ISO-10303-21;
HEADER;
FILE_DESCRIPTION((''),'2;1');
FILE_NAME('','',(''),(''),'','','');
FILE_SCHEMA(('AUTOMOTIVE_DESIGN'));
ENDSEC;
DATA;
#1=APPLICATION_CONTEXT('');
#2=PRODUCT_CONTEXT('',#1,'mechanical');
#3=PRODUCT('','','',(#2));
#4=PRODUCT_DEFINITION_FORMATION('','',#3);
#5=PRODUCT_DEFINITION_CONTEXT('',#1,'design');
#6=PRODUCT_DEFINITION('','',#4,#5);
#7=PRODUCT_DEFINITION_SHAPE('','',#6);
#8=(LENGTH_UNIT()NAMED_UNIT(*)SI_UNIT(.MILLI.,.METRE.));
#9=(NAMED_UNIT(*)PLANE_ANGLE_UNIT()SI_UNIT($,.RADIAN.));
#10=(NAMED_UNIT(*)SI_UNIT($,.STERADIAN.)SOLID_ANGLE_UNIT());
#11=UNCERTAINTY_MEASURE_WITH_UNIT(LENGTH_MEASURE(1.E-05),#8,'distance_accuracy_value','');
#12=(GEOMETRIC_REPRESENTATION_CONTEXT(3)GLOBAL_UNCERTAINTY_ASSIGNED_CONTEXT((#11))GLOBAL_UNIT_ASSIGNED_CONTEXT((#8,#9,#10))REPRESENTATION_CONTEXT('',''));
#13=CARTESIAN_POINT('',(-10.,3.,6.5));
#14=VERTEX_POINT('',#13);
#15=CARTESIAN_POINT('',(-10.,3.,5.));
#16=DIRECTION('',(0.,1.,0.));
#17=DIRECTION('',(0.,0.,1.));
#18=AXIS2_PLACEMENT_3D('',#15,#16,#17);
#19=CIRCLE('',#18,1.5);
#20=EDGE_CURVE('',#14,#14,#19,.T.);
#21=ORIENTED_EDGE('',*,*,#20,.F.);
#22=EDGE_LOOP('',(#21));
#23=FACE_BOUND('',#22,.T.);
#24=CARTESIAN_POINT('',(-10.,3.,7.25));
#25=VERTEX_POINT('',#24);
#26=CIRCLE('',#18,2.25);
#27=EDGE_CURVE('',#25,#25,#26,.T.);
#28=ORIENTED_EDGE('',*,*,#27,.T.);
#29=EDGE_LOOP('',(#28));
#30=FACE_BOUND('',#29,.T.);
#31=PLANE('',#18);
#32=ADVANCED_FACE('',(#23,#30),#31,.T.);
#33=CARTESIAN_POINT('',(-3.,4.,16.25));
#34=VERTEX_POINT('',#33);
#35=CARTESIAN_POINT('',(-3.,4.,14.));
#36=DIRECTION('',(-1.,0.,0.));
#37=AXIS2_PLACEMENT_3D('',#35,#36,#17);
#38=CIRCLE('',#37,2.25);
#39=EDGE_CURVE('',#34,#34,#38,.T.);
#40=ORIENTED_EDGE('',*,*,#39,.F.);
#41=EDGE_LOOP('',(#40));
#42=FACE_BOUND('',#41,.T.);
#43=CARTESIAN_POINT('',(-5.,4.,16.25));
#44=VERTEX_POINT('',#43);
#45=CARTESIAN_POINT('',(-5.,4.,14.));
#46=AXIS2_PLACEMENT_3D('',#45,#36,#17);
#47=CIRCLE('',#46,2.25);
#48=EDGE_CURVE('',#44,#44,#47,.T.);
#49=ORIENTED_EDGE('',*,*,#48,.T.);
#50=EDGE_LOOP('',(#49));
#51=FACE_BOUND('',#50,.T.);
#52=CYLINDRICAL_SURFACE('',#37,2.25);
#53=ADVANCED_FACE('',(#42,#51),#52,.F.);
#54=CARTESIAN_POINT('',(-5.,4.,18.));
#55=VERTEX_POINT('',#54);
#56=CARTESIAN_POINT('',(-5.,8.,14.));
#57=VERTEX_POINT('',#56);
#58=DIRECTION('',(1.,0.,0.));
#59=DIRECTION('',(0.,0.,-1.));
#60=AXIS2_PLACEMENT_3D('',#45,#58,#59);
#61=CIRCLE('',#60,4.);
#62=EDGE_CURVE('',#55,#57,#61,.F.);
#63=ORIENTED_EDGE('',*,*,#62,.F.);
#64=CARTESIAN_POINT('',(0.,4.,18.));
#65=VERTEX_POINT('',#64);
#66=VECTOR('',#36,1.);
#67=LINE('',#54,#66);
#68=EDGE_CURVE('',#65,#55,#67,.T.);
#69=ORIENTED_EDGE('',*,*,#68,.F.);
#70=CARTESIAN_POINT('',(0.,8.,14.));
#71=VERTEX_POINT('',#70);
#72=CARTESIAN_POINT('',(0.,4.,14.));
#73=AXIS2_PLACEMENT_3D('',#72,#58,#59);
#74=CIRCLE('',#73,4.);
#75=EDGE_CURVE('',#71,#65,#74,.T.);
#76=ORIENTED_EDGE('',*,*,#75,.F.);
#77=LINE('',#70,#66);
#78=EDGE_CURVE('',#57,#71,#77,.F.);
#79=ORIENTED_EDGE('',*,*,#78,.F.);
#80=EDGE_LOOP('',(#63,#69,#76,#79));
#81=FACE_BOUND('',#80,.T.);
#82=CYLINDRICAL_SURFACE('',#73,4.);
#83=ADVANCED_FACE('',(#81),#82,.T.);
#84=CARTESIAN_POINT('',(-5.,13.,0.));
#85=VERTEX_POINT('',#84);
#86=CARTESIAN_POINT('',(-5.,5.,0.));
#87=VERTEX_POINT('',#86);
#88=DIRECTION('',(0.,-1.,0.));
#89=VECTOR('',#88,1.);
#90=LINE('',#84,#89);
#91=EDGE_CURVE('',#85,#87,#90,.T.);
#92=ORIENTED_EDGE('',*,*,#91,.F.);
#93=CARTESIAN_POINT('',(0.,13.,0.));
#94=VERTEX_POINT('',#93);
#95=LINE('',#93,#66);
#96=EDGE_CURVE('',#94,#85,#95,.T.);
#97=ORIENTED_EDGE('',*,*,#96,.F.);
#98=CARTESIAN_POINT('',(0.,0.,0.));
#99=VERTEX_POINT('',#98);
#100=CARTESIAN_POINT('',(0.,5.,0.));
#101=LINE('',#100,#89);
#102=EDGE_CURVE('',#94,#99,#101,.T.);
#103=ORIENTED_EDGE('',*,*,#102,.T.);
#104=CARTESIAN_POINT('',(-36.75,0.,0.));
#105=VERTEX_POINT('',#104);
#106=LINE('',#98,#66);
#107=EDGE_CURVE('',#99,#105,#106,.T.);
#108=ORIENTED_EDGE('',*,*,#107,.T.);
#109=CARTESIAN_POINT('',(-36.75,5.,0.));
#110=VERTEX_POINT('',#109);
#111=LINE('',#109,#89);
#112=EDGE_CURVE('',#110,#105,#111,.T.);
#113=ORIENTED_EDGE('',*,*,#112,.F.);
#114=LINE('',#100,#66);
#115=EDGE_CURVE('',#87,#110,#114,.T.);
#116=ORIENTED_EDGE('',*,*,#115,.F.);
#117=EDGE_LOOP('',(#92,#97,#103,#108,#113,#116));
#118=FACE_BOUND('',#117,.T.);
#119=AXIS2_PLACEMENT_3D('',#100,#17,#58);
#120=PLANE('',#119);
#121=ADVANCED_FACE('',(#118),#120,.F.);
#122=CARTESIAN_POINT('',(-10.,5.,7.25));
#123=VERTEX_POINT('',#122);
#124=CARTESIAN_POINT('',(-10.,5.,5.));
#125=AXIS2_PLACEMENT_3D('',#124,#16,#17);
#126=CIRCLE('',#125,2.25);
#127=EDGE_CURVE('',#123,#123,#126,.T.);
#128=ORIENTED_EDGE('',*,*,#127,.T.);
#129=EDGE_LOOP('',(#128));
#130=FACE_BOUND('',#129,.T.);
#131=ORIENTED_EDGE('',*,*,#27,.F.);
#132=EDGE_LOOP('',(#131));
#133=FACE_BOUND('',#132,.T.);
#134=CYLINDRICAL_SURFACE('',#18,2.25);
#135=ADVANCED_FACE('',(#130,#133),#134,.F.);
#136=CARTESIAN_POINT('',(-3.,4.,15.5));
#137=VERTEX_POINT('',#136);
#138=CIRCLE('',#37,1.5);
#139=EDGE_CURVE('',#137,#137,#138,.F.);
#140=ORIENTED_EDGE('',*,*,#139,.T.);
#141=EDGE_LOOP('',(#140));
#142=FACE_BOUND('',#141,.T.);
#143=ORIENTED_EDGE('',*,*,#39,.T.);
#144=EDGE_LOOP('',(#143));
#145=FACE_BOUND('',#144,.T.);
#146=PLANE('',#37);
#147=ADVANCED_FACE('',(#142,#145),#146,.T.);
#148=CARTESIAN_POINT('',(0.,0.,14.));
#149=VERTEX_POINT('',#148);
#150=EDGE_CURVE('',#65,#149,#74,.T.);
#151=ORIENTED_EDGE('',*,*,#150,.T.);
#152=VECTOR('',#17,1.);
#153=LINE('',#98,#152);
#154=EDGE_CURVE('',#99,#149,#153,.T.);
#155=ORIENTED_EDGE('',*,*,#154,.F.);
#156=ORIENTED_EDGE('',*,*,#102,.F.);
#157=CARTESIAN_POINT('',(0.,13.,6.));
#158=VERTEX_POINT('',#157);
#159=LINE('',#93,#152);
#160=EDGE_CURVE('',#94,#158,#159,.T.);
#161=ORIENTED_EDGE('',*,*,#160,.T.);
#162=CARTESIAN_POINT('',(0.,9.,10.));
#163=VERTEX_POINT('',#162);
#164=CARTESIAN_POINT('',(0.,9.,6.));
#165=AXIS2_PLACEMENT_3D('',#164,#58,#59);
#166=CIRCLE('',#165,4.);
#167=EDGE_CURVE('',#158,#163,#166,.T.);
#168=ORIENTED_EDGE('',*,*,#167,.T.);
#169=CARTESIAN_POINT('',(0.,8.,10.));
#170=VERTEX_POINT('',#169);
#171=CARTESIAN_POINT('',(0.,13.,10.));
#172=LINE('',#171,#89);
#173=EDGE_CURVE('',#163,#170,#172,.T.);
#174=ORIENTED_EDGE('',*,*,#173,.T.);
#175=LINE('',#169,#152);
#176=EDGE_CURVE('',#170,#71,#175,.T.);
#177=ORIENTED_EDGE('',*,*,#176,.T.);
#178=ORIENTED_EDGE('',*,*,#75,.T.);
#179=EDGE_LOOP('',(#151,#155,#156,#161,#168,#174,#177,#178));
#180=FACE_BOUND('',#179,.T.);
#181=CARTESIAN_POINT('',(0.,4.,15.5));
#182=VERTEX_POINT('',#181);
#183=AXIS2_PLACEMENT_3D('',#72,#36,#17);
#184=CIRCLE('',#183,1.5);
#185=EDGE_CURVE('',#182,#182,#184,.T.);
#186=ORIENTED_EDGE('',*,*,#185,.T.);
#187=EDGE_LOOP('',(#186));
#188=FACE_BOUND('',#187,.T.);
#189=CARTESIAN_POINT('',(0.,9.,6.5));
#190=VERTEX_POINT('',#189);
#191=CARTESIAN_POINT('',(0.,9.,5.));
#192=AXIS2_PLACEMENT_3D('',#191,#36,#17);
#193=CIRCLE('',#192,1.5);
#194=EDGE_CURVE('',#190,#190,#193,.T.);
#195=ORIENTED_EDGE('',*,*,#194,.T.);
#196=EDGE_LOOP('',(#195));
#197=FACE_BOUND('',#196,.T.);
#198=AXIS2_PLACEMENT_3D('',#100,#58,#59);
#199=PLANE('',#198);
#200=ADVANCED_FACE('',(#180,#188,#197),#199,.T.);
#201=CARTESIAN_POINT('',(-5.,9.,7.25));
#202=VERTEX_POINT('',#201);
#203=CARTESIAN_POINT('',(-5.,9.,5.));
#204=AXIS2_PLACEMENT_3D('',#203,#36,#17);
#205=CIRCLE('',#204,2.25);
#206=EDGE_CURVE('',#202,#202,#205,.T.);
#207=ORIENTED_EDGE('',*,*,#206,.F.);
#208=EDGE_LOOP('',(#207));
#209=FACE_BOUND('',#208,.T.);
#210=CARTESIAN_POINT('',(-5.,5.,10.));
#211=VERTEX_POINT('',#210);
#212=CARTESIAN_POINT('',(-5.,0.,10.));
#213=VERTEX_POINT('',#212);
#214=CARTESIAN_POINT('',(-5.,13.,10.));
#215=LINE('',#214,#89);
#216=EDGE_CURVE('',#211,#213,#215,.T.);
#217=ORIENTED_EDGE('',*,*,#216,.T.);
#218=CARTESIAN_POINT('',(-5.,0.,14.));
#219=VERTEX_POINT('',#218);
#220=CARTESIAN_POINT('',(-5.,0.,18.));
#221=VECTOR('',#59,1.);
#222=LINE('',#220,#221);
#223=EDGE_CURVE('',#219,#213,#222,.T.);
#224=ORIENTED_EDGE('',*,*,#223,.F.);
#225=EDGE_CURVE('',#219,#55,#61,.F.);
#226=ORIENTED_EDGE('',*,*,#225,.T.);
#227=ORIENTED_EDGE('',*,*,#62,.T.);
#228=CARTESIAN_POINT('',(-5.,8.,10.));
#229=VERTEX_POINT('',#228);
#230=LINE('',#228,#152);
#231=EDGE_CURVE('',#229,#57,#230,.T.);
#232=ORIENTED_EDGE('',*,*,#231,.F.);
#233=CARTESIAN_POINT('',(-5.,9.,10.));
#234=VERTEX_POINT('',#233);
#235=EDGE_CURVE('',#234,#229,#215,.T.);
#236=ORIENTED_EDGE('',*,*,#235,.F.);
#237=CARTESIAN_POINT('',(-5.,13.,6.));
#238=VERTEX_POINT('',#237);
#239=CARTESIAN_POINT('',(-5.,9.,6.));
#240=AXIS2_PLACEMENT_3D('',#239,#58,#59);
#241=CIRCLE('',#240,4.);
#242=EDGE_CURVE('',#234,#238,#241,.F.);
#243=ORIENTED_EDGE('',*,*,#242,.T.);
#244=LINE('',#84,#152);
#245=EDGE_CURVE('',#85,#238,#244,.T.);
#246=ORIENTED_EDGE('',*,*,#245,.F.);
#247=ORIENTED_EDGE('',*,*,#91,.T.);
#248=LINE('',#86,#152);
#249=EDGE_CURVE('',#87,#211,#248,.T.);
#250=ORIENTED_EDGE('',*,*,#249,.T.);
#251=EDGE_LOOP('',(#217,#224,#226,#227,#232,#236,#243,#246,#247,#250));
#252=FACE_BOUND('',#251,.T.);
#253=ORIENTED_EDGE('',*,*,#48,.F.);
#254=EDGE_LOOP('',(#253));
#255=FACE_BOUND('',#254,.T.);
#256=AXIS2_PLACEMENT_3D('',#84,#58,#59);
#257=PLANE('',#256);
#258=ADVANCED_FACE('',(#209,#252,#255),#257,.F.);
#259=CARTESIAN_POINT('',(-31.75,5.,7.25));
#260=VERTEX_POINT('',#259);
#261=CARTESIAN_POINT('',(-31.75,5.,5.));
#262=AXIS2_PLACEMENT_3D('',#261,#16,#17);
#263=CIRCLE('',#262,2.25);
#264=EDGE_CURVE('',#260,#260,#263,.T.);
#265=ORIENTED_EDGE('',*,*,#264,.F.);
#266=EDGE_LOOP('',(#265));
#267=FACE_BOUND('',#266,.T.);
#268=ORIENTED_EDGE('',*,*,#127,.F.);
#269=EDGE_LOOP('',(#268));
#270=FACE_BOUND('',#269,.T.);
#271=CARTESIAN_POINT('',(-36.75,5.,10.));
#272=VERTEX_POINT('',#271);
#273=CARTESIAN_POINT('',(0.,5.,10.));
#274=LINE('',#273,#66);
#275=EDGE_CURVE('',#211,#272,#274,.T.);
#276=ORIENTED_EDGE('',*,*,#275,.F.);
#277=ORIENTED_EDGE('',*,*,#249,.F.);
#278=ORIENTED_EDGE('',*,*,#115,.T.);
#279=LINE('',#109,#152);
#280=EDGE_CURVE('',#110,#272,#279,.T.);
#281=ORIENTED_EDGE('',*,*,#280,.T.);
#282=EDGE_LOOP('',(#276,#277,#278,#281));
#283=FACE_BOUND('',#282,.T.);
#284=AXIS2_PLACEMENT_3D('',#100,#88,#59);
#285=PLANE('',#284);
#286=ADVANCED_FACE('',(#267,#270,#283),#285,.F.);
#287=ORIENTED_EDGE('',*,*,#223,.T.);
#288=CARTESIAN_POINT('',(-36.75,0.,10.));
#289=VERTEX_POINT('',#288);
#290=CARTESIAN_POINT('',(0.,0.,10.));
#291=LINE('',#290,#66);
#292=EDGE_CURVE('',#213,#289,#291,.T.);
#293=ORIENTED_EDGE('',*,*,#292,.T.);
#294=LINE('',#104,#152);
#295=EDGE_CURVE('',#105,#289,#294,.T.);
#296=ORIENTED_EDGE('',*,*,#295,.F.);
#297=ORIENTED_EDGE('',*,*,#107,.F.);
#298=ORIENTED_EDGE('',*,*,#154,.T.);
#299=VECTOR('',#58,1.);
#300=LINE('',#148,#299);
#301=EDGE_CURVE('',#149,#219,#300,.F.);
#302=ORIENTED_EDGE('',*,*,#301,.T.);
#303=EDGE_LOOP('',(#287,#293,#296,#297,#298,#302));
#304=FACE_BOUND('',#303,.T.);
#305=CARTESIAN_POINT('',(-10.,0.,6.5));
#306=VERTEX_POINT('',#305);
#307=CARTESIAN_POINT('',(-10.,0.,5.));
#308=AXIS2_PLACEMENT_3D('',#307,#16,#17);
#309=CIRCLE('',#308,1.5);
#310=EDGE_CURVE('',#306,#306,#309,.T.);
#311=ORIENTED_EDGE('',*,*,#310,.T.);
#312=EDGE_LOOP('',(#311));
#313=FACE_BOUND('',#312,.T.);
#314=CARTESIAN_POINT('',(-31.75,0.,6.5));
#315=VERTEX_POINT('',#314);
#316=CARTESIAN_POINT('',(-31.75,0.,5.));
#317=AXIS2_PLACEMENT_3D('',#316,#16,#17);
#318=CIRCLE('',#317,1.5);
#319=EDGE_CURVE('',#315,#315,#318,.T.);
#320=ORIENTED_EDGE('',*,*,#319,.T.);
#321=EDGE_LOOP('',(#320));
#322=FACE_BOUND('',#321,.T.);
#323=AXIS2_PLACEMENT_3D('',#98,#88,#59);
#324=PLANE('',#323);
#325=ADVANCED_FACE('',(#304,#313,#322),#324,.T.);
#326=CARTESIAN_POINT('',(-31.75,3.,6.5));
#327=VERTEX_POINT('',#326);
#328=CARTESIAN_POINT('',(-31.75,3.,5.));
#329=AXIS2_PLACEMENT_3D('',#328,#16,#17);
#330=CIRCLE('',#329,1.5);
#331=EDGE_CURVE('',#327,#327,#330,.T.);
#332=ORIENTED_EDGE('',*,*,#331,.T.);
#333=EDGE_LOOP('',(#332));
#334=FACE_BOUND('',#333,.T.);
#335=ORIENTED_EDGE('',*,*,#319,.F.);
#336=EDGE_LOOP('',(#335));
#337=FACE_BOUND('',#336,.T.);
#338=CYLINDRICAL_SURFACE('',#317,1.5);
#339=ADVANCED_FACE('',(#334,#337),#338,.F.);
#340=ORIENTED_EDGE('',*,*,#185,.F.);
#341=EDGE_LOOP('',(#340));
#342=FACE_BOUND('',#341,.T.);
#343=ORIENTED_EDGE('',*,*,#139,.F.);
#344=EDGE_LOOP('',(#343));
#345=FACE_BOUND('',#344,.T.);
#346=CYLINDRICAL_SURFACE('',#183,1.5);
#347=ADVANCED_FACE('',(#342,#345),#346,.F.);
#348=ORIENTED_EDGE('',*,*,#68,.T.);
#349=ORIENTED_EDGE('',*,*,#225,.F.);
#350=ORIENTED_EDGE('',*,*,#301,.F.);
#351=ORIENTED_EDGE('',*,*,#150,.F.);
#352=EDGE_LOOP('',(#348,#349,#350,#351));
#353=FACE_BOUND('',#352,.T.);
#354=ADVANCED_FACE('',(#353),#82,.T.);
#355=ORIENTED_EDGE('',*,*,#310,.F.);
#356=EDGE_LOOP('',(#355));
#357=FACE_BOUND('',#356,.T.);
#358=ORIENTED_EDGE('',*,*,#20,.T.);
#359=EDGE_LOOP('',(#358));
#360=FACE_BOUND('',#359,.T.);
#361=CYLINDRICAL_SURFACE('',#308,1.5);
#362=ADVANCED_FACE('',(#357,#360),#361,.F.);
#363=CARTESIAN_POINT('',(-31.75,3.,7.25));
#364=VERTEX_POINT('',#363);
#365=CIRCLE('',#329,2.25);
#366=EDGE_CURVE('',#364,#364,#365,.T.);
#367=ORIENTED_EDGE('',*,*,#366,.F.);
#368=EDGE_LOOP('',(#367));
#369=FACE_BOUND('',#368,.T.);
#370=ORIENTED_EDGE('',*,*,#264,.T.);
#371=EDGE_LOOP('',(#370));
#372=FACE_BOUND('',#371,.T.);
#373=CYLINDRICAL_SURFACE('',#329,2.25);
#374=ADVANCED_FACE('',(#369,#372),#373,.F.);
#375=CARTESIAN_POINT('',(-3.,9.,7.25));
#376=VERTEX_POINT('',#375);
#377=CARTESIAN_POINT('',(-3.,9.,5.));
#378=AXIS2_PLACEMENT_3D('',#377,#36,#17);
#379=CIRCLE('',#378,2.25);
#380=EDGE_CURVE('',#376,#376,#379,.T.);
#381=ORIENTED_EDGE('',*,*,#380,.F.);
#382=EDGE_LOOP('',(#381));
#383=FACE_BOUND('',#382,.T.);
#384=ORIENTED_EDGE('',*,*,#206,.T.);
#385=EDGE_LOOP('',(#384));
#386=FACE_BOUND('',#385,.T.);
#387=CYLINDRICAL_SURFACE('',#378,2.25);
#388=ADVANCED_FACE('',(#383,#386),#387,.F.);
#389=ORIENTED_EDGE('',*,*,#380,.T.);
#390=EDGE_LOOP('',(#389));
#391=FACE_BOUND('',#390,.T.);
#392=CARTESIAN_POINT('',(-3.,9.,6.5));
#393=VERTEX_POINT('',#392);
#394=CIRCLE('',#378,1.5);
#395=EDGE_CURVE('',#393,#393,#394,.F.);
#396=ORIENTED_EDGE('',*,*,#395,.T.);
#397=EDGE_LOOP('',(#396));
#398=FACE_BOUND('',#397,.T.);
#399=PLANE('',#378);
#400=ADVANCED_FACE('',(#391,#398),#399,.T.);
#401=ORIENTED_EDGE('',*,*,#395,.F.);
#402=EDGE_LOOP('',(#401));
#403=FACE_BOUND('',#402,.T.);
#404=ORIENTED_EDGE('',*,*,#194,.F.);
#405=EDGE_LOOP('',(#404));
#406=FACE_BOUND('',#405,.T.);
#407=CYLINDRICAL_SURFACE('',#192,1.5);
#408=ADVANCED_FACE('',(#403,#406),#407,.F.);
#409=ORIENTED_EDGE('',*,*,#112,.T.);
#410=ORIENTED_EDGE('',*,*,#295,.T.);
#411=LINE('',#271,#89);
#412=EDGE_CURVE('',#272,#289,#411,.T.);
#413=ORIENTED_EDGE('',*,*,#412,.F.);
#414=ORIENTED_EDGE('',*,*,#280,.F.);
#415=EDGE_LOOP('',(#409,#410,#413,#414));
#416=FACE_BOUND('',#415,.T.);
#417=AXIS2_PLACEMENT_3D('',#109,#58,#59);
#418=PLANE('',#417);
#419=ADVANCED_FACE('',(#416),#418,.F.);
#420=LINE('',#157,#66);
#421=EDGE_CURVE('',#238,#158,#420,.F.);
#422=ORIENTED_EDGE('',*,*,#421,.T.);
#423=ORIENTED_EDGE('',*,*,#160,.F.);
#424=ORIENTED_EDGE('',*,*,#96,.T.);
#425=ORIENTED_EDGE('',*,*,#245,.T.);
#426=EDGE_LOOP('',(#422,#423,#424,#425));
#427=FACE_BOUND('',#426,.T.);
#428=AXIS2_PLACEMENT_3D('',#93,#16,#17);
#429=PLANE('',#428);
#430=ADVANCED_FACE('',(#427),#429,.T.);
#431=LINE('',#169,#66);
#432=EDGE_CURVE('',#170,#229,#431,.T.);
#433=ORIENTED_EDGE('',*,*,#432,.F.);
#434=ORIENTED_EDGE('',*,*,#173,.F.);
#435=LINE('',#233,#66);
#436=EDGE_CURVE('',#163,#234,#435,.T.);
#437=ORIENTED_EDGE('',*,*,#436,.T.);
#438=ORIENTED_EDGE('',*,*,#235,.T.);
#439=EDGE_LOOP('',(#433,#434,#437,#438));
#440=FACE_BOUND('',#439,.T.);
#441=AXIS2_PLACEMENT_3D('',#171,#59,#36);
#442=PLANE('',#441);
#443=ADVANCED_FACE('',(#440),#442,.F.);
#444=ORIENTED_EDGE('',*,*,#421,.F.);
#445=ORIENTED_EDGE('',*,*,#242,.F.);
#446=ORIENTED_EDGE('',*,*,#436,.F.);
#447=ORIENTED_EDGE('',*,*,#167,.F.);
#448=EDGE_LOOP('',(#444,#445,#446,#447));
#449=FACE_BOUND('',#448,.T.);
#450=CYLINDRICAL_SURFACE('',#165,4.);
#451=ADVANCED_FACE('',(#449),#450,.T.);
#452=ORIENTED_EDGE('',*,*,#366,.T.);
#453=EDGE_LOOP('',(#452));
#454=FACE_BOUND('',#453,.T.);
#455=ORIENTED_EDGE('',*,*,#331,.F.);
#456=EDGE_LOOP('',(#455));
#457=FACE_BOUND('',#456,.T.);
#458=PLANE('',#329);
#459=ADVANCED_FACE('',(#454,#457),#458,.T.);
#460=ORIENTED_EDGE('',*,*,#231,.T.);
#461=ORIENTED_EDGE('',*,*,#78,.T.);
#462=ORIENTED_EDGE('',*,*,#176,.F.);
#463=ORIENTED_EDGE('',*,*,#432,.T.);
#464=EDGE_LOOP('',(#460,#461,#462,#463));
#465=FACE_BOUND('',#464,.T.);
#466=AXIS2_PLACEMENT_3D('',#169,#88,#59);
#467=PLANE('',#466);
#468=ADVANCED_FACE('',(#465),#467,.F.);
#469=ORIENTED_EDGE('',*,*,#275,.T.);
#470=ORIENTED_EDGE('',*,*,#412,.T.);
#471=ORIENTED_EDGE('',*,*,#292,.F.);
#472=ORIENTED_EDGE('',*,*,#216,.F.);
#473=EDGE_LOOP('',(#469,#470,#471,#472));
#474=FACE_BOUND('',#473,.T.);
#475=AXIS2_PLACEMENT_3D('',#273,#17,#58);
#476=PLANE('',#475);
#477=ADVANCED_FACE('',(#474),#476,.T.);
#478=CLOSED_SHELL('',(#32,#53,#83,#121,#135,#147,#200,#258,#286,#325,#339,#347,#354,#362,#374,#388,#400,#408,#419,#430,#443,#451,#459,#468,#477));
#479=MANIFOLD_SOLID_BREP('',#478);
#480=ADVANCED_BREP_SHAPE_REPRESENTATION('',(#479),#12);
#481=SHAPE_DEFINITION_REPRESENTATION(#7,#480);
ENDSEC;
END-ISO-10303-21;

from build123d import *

# Parameters (mm, degrees)
SKETCH_4_W          = 36.75
SKETCH_4_H          = 10
EXTRUDE_1_DEPTH     = 5
EXTRUDE_START       = 5
SKETCH_4_3_W        = 5
SKETCH_4_3_H        = 10
EXTRUDE_2_DEPTH     = 8
SKETCH_5_W          = 5
SKETCH_5_H          = 13
EXTRUDE_3_DEPTH     = 8
SKETCH_6_R          = 1.5
SKETCH_6_W          = 8
SKETCH_6_H          = 5
CUT_EXTRUDE_1_DEPTH = 39.74354785
SKETCH_6_3_R        = 2.25
CUT_EXTRUDE_2_DEPTH = 2
SKETCH_7_R          = 2.25
CUT_EXTRUDE_3_DEPTH = 2
SKETCH_7_3_R        = 1.5
CUT_EXTRUDE_4_DEPTH = 42.696072957
FILLET_1_R          = 4


with BuildPart() as part:
    # 草图4 → 凸台-拉伸1 (new body)
    with BuildSketch(Plane(origin=(0, 0, 0), x_dir=(1, 0, 0), z_dir=(0, 1, 0))):
        with Locations((-18.375, -5)):
            Rectangle(SKETCH_4_W, SKETCH_4_H)
    extrude(amount=EXTRUDE_1_DEPTH)

    # 草图4<3> → 凸台-拉伸2 (add)
    with BuildSketch(Plane(origin=(0, 0, 0), x_dir=(1, 0, 0), z_dir=(0, 1, 0)).offset(EXTRUDE_START)):
        with Locations((-2.5, -5)):
            Rectangle(SKETCH_4_3_W, SKETCH_4_3_H)
    extrude(amount=EXTRUDE_2_DEPTH)

    # 草图5 → 凸台-拉伸3 (add)
    with BuildSketch(Plane.XY.offset(10)):
        with Locations((-2.5, 6.5)):
            Rectangle(SKETCH_5_W, SKETCH_5_H)
    extrude(amount=EXTRUDE_3_DEPTH)

    # 草图6 → 切除-拉伸1 (cut, through all)
    with BuildSketch(Plane.ZY.offset(5)):
        with Locations((5, 9)):
            Circle(SKETCH_6_R)
        with Locations((14, 4)):
            Circle(SKETCH_6_R)
        with Locations((14, 10.5)):
            Rectangle(SKETCH_6_W, SKETCH_6_H)
    extrude(amount=-CUT_EXTRUDE_1_DEPTH, mode=Mode.SUBTRACT)

    # 草图6<3> → 切除-拉伸2 (cut)
    with BuildSketch(Plane.ZY.offset(5)):
        with Locations((5, 9)):
            Circle(SKETCH_6_3_R)
        with Locations((14, 4)):
            Circle(SKETCH_6_3_R)
    extrude(amount=-CUT_EXTRUDE_2_DEPTH, mode=Mode.SUBTRACT)

    # 草图7 → 切除-拉伸3 (cut)
    with BuildSketch(Plane(origin=(0, 5, 0), x_dir=(1, 0, 0), z_dir=(0, 1, 0))):
        with Locations(Location((-31.75, -5, 0), (0, 0, 270))):
            Circle(SKETCH_7_R)
        with Locations(Location((-10, -5, 0), (0, 0, 270))):
            Circle(SKETCH_7_R)
    extrude(amount=-CUT_EXTRUDE_3_DEPTH, mode=Mode.SUBTRACT)

    # 草图7<3> → 切除-拉伸4 (cut, through all)
    with BuildSketch(Plane(origin=(0, 5, 0), x_dir=(1, 0, 0), z_dir=(0, 1, 0))):
        with Locations(Location((-31.75, -5, 0), (0, 0, 270))):
            Circle(SKETCH_7_3_R)
        with Locations(Location((-10, -5, 0), (0, 0, 270))):
            Circle(SKETCH_7_3_R)
    extrude(amount=-CUT_EXTRUDE_4_DEPTH, mode=Mode.SUBTRACT)

    # 圆角1
    fillet_1_edges = [part.edges().sort_by_distance(p)[0] for p in [
        (-2.5, 13, 10),
        (-2.5, 0, 18),
        (-2.5, 8, 18),
    ]]
    fillet(fillet_1_edges, radius=FILLET_1_R - 0.0001)  # a hair under: the kernel refuses the full size


solid = part.part
